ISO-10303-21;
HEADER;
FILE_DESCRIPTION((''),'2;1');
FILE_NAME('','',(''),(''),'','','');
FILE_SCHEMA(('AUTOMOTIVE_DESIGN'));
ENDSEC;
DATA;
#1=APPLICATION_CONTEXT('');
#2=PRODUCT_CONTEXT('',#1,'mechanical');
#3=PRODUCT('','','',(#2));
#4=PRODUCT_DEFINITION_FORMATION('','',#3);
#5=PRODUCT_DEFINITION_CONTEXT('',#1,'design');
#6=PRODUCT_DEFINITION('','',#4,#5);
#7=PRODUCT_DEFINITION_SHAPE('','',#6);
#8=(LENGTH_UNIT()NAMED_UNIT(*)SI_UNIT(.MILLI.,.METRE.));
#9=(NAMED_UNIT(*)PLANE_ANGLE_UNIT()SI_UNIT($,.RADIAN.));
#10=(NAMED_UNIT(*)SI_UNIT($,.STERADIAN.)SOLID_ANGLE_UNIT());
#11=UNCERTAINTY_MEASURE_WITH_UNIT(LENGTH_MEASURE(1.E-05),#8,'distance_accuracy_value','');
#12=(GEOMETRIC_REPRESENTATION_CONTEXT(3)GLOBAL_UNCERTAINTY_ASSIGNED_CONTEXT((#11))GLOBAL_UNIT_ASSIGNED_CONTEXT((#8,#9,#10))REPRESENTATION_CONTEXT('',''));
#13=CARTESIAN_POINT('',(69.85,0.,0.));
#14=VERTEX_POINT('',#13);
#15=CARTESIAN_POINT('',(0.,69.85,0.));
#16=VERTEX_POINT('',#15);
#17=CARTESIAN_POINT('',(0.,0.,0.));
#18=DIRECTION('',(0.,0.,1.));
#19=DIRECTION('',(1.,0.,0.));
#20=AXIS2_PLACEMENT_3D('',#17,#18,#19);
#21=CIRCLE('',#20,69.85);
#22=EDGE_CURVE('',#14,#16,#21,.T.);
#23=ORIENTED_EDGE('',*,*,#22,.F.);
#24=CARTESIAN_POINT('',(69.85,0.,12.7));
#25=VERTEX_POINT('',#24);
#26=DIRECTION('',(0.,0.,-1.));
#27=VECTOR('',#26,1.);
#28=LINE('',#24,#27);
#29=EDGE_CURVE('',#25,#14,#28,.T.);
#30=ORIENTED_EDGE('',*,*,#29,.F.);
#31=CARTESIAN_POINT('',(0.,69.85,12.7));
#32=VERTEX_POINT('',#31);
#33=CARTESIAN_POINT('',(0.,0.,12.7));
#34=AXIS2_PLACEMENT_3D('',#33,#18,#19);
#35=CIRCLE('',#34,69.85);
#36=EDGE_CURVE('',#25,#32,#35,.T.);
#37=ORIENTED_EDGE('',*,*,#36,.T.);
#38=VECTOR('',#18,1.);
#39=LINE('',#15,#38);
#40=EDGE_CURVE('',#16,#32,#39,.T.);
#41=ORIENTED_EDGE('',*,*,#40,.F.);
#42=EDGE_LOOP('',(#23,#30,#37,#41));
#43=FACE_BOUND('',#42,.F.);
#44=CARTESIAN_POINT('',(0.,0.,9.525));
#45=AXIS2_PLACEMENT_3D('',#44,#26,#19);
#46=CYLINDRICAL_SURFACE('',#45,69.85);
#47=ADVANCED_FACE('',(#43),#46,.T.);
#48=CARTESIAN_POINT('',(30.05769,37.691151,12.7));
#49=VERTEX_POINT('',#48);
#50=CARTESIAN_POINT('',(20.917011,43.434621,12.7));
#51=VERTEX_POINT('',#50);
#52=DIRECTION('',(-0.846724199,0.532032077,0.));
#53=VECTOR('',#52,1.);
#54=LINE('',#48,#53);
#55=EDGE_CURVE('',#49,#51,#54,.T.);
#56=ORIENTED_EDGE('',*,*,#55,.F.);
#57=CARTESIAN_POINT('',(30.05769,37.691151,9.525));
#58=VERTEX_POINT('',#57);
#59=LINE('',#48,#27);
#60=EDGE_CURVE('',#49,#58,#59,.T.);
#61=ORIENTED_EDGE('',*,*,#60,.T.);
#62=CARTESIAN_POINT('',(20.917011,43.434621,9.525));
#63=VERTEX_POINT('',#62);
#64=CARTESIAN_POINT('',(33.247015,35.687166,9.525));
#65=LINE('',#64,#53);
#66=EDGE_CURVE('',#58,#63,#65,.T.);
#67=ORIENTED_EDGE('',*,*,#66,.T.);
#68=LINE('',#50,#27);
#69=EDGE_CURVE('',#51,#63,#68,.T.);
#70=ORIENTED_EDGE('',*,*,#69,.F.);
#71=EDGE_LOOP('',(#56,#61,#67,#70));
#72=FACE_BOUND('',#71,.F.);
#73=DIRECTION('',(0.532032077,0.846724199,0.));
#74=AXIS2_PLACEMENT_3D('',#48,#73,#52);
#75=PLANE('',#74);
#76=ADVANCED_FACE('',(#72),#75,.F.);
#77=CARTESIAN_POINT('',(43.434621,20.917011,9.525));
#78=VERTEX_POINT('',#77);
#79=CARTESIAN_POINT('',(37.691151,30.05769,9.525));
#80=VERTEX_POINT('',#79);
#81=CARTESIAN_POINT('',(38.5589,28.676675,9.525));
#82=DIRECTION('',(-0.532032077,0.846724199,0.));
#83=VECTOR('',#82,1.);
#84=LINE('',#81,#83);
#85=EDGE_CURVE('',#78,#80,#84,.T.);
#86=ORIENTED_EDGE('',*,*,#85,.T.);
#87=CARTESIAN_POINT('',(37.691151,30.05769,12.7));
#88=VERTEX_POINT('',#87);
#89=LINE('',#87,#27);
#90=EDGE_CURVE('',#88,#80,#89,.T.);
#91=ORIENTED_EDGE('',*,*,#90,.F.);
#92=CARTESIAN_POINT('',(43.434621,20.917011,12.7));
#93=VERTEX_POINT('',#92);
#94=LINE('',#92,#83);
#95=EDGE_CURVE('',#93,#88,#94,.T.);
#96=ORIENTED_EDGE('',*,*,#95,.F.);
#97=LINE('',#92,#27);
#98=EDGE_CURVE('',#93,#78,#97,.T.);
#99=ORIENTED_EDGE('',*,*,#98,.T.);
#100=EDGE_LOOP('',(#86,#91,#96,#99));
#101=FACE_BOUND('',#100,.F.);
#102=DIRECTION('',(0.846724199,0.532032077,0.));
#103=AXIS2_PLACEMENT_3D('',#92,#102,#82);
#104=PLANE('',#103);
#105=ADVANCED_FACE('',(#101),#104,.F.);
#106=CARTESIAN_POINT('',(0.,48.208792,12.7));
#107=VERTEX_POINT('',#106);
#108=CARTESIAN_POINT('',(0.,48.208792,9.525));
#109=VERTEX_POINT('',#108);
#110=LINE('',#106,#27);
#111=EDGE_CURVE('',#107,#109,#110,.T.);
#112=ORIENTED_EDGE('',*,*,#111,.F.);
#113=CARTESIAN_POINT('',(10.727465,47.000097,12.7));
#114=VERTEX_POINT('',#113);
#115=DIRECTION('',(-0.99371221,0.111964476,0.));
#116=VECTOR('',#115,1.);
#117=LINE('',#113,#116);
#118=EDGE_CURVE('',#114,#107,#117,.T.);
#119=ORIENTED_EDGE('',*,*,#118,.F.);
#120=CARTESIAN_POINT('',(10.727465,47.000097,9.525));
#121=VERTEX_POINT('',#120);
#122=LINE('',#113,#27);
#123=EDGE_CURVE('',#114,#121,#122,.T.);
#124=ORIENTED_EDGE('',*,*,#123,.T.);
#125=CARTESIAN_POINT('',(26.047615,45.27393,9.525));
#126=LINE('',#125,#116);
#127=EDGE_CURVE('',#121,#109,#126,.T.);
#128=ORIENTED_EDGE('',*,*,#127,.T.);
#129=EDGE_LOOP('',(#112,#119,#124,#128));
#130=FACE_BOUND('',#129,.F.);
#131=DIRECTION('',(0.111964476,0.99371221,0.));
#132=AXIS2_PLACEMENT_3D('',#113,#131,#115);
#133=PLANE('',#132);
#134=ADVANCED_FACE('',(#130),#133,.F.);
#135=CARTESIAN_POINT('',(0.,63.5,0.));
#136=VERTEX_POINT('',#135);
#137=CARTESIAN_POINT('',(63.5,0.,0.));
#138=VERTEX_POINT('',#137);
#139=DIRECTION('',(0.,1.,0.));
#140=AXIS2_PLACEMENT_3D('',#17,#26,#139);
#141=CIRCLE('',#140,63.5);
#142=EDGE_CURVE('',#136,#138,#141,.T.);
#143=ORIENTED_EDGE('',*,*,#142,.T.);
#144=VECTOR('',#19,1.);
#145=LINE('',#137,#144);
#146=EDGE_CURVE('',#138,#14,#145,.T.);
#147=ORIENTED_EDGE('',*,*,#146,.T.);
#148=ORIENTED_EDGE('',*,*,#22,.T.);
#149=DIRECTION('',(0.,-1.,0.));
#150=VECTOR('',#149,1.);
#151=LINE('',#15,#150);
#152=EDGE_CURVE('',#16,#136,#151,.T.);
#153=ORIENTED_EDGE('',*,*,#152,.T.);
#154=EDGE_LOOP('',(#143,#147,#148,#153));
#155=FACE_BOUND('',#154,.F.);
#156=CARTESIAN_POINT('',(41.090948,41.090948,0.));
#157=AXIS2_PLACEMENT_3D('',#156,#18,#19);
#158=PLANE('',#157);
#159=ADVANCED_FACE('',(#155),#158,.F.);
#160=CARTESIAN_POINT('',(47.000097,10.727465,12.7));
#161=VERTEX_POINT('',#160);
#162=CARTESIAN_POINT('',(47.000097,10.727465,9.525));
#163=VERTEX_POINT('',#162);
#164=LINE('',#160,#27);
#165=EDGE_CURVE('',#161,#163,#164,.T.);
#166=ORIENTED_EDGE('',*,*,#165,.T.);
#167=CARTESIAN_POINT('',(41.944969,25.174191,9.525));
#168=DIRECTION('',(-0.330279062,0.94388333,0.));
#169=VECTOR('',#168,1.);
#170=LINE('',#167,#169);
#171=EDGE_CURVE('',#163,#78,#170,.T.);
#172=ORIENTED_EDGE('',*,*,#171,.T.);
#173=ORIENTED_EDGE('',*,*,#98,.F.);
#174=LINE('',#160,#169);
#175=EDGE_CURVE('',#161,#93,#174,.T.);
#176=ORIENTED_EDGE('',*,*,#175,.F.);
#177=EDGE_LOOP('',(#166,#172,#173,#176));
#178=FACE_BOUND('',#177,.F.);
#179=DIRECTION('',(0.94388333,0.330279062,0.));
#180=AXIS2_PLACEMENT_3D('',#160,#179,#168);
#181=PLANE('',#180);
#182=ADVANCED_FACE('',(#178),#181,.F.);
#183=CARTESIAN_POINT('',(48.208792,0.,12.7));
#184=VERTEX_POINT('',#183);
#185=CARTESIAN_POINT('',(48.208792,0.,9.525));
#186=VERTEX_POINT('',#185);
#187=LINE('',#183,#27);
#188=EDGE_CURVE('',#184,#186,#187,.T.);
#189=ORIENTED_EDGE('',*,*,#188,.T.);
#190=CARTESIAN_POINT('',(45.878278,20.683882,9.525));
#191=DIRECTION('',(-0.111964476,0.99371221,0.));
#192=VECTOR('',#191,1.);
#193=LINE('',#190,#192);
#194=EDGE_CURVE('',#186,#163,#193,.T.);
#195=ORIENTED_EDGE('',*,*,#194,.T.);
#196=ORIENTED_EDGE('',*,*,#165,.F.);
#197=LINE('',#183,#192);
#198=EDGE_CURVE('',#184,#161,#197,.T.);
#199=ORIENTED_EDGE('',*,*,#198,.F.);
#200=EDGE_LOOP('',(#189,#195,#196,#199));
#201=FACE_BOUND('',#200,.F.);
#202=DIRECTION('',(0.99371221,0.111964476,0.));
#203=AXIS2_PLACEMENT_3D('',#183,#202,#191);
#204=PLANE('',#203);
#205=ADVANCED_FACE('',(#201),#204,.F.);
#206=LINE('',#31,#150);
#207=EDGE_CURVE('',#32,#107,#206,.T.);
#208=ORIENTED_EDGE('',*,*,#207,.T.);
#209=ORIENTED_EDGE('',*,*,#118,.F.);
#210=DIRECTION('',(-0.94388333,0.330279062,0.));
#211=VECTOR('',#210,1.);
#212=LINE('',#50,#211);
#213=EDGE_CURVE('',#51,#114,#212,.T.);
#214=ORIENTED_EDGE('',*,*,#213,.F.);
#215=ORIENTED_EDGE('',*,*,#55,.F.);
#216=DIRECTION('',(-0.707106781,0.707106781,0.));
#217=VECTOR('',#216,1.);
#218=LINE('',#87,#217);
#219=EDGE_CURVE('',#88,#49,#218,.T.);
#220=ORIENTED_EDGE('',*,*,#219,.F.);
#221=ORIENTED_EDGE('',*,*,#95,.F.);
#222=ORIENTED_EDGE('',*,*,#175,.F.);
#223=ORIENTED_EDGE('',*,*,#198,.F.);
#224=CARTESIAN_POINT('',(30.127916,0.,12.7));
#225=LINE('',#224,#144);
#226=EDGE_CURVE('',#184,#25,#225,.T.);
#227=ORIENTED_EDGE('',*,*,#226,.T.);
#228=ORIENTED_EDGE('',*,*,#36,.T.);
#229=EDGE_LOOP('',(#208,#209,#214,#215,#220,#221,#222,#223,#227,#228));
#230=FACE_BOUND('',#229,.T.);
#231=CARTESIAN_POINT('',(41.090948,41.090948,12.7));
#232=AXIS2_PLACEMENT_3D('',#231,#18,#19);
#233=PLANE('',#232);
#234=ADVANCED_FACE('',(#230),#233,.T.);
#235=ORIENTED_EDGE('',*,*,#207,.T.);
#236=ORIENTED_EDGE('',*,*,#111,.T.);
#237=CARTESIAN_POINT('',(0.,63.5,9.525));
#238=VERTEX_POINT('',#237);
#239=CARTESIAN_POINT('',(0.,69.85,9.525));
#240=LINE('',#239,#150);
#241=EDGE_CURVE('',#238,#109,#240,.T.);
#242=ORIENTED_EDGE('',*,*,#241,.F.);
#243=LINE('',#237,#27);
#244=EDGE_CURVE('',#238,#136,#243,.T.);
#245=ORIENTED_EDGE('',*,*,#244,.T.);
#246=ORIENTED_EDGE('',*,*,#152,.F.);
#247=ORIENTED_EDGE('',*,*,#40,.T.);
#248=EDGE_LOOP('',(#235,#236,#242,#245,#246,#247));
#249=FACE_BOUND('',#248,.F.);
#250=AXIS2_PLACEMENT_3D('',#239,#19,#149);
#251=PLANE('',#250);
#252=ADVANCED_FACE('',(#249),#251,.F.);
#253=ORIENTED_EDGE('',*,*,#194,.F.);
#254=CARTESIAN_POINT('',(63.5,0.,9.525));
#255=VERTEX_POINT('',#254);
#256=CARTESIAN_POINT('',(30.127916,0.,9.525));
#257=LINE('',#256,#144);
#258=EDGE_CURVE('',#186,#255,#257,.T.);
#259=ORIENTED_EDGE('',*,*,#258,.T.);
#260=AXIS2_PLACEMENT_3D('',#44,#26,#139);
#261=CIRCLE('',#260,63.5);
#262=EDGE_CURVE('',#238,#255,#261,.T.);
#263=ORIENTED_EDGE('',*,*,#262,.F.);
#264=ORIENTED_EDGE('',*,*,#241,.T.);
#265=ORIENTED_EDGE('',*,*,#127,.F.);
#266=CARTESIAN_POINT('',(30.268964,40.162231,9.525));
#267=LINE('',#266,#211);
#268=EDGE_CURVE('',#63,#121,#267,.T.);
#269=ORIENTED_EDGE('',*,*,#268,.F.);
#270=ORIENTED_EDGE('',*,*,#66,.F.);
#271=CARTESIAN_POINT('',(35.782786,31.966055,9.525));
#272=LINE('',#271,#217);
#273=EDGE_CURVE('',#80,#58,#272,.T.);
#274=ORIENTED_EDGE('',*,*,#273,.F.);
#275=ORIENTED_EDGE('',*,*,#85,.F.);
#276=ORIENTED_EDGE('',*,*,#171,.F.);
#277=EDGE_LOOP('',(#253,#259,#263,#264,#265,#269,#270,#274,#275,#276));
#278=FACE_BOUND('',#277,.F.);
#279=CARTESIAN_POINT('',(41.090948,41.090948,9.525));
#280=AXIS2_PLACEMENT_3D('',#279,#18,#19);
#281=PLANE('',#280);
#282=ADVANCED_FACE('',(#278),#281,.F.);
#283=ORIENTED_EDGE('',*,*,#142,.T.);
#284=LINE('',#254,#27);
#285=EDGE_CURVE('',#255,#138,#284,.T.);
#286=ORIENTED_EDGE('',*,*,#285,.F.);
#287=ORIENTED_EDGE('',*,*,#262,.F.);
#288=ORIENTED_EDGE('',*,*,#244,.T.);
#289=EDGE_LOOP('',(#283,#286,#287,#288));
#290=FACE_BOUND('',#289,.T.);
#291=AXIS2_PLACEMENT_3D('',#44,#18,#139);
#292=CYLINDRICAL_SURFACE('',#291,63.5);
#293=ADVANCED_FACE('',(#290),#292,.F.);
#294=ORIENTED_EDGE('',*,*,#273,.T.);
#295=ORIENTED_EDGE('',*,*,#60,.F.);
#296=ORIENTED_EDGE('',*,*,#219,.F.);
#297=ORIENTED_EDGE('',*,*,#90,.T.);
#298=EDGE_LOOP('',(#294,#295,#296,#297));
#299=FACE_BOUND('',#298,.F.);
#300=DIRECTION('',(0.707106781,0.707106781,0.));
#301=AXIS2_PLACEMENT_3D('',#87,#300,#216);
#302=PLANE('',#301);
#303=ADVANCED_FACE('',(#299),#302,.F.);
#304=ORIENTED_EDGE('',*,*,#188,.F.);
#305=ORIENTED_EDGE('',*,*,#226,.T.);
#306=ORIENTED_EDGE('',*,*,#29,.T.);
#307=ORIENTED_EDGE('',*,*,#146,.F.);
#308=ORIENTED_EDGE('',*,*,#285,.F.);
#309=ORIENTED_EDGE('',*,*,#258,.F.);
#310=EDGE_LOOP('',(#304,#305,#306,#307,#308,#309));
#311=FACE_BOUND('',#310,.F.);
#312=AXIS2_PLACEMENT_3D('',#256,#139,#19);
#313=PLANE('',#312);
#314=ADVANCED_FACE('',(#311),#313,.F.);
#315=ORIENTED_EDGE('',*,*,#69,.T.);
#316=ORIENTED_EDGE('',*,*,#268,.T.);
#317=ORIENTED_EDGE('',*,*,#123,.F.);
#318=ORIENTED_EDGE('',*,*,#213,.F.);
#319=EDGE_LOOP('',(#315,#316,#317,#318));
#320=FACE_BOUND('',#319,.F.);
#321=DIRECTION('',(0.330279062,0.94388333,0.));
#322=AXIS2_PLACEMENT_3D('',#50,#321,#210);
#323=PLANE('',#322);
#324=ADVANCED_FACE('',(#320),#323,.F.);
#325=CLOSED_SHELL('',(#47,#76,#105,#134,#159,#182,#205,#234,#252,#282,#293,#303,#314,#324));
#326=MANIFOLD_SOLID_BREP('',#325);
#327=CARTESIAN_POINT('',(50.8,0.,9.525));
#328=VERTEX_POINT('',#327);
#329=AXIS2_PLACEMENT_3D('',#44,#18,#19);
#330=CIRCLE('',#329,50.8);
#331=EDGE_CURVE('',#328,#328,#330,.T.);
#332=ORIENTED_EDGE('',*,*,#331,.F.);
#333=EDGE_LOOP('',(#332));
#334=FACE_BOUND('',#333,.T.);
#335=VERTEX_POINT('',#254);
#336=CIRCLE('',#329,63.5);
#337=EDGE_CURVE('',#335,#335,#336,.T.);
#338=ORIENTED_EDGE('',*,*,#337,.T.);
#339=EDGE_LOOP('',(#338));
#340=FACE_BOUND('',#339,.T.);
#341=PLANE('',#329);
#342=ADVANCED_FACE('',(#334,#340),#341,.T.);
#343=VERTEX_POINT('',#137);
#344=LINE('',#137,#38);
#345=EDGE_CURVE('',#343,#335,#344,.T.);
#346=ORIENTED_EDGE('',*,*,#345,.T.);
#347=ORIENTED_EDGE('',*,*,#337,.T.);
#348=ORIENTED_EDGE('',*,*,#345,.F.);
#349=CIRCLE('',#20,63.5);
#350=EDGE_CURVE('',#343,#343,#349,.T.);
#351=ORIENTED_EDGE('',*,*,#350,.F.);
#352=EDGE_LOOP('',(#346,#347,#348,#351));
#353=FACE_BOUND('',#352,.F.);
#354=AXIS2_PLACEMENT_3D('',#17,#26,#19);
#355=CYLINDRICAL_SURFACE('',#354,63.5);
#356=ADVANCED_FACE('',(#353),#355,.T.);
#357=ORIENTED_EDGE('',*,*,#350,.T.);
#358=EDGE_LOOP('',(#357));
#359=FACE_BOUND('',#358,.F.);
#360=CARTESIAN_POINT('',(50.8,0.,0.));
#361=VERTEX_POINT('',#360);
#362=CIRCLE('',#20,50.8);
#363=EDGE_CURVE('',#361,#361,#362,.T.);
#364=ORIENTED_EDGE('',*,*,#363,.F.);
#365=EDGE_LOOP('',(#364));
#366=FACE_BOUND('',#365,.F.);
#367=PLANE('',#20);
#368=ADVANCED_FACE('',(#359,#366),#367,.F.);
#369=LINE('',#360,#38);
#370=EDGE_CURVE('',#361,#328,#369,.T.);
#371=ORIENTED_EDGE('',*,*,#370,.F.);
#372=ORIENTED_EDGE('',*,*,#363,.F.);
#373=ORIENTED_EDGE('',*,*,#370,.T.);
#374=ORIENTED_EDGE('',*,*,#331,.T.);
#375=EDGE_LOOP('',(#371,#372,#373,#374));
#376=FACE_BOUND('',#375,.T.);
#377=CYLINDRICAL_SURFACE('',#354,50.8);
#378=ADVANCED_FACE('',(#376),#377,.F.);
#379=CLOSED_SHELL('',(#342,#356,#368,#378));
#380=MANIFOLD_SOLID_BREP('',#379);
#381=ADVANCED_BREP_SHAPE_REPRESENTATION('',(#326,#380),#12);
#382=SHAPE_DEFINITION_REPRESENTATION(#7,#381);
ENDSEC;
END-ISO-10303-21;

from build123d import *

# Parameters (mm, degrees)
F0_R     = 50.8
F1_DEPTH = 9.525
F2_R     = 63.5
F3_DEPTH = 9.525
F6_DEPTH = 9.525
F7_DEPTH = 3.175
F9_DEPTH = 25.4


# Not quite as in the source:
# - a length typed as a fraction of an inch, garbled in the dataset ("3 / 203.2 mm" for 3/8 in), is restored


with BuildPart() as f1:
    # F0 (on Top) → F1 (new body)
    with BuildSketch(Plane.XY):
        Circle(F0_R)
    extrude(amount=F1_DEPTH)


with BuildPart() as f3:
    # F2 (on Top) → F3 (new body)
    with BuildSketch(Plane.XY):
        Circle(F2_R)
    extrude(amount=F3_DEPTH)

    # F4: cut F1
    add(f1.part, mode=Mode.SUBTRACT)


with BuildPart() as f6:
    # F5 (on face) → F6 (new body)
    with BuildSketch(Plane.XY.offset(9.525)):
        with BuildLine():
            Line((63.5, 0), (69.85, 0))
            ThreePointArc((69.85, 0), (49.3914086659, 49.3914086659), (0, 69.85))
            Line((0, 69.85), (0, 63.5))
            ThreePointArc((0, 63.5), (44.9012806053, 44.9012806053), (63.5, 0))
        make_face()
    extrude(amount=-F6_DEPTH)

    # F5 (on face) → F7 (join)
    with BuildSketch(Plane.XY.offset(9.525)):
        with BuildLine():
            Line((63.5, 0), (69.85, 0))
            ThreePointArc((69.85, 0), (49.3914086659, 49.3914086659), (0, 69.85))
            Line((0, 69.85), (0, 63.5))
            ThreePointArc((0, 63.5), (44.9012806053, 44.9012806053), (63.5, 0))
        make_face()
        with BuildLine():
            Line((30.1279164851, 0), (63.5, 0))
            ThreePointArc((63.5, 0), (44.9012806053, 44.9012806053), (0, 63.5))
            Line((0, 63.5), (0, 30.1279164851))
            ThreePointArc((0, 30.1279164851), (21.3036540496, 21.3036540496), (30.1279164851, 0))
        make_face()
    extrude(amount=F7_DEPTH)

    # F8 (on face) → F9 (cut)
    with BuildSketch(Plane.XY.offset(12.7)):
        Polygon((47.0000967019, -10.7274653679), (48.2087917626, 0), (47.0000967019, 10.7274653679), (43.4346205373, 20.9170108283), (37.6911511317, 30.0576900239), (30.0576900239, 37.6911511317), (20.9170108283, 43.4346205373), (10.7274653679, 47.0000967019), (0, 48.2087917626), (-10.7274653679, 47.0000967019), (-20.9170108283, 43.4346205373), (-30.0576900239, 37.6911511317), (-37.6911511317, 30.0576900239), (-43.4346205373, 20.9170108283), (-47.0000967019, 10.7274653679), (-48.2087917626, 0), (-47.0000967019, -10.7274653679), (-43.4346205373, -20.9170108283), (-37.6911511317, -30.0576900239), (-30.0576900239, -37.6911511317), (-20.9170108283, -43.4346205373), (-10.7274653679, -47.0000967019), (0, -48.2087917626), (10.7274653679, -47.0000967019), (20.9170108283, -43.4346205373), (30.0576900239, -37.6911511317), (37.6911511317, -30.0576900239), (43.4346205373, -20.9170108283), align=None)
    extrude(amount=-F9_DEPTH, mode=Mode.SUBTRACT)


solid = Compound([f3.part, f6.part])
